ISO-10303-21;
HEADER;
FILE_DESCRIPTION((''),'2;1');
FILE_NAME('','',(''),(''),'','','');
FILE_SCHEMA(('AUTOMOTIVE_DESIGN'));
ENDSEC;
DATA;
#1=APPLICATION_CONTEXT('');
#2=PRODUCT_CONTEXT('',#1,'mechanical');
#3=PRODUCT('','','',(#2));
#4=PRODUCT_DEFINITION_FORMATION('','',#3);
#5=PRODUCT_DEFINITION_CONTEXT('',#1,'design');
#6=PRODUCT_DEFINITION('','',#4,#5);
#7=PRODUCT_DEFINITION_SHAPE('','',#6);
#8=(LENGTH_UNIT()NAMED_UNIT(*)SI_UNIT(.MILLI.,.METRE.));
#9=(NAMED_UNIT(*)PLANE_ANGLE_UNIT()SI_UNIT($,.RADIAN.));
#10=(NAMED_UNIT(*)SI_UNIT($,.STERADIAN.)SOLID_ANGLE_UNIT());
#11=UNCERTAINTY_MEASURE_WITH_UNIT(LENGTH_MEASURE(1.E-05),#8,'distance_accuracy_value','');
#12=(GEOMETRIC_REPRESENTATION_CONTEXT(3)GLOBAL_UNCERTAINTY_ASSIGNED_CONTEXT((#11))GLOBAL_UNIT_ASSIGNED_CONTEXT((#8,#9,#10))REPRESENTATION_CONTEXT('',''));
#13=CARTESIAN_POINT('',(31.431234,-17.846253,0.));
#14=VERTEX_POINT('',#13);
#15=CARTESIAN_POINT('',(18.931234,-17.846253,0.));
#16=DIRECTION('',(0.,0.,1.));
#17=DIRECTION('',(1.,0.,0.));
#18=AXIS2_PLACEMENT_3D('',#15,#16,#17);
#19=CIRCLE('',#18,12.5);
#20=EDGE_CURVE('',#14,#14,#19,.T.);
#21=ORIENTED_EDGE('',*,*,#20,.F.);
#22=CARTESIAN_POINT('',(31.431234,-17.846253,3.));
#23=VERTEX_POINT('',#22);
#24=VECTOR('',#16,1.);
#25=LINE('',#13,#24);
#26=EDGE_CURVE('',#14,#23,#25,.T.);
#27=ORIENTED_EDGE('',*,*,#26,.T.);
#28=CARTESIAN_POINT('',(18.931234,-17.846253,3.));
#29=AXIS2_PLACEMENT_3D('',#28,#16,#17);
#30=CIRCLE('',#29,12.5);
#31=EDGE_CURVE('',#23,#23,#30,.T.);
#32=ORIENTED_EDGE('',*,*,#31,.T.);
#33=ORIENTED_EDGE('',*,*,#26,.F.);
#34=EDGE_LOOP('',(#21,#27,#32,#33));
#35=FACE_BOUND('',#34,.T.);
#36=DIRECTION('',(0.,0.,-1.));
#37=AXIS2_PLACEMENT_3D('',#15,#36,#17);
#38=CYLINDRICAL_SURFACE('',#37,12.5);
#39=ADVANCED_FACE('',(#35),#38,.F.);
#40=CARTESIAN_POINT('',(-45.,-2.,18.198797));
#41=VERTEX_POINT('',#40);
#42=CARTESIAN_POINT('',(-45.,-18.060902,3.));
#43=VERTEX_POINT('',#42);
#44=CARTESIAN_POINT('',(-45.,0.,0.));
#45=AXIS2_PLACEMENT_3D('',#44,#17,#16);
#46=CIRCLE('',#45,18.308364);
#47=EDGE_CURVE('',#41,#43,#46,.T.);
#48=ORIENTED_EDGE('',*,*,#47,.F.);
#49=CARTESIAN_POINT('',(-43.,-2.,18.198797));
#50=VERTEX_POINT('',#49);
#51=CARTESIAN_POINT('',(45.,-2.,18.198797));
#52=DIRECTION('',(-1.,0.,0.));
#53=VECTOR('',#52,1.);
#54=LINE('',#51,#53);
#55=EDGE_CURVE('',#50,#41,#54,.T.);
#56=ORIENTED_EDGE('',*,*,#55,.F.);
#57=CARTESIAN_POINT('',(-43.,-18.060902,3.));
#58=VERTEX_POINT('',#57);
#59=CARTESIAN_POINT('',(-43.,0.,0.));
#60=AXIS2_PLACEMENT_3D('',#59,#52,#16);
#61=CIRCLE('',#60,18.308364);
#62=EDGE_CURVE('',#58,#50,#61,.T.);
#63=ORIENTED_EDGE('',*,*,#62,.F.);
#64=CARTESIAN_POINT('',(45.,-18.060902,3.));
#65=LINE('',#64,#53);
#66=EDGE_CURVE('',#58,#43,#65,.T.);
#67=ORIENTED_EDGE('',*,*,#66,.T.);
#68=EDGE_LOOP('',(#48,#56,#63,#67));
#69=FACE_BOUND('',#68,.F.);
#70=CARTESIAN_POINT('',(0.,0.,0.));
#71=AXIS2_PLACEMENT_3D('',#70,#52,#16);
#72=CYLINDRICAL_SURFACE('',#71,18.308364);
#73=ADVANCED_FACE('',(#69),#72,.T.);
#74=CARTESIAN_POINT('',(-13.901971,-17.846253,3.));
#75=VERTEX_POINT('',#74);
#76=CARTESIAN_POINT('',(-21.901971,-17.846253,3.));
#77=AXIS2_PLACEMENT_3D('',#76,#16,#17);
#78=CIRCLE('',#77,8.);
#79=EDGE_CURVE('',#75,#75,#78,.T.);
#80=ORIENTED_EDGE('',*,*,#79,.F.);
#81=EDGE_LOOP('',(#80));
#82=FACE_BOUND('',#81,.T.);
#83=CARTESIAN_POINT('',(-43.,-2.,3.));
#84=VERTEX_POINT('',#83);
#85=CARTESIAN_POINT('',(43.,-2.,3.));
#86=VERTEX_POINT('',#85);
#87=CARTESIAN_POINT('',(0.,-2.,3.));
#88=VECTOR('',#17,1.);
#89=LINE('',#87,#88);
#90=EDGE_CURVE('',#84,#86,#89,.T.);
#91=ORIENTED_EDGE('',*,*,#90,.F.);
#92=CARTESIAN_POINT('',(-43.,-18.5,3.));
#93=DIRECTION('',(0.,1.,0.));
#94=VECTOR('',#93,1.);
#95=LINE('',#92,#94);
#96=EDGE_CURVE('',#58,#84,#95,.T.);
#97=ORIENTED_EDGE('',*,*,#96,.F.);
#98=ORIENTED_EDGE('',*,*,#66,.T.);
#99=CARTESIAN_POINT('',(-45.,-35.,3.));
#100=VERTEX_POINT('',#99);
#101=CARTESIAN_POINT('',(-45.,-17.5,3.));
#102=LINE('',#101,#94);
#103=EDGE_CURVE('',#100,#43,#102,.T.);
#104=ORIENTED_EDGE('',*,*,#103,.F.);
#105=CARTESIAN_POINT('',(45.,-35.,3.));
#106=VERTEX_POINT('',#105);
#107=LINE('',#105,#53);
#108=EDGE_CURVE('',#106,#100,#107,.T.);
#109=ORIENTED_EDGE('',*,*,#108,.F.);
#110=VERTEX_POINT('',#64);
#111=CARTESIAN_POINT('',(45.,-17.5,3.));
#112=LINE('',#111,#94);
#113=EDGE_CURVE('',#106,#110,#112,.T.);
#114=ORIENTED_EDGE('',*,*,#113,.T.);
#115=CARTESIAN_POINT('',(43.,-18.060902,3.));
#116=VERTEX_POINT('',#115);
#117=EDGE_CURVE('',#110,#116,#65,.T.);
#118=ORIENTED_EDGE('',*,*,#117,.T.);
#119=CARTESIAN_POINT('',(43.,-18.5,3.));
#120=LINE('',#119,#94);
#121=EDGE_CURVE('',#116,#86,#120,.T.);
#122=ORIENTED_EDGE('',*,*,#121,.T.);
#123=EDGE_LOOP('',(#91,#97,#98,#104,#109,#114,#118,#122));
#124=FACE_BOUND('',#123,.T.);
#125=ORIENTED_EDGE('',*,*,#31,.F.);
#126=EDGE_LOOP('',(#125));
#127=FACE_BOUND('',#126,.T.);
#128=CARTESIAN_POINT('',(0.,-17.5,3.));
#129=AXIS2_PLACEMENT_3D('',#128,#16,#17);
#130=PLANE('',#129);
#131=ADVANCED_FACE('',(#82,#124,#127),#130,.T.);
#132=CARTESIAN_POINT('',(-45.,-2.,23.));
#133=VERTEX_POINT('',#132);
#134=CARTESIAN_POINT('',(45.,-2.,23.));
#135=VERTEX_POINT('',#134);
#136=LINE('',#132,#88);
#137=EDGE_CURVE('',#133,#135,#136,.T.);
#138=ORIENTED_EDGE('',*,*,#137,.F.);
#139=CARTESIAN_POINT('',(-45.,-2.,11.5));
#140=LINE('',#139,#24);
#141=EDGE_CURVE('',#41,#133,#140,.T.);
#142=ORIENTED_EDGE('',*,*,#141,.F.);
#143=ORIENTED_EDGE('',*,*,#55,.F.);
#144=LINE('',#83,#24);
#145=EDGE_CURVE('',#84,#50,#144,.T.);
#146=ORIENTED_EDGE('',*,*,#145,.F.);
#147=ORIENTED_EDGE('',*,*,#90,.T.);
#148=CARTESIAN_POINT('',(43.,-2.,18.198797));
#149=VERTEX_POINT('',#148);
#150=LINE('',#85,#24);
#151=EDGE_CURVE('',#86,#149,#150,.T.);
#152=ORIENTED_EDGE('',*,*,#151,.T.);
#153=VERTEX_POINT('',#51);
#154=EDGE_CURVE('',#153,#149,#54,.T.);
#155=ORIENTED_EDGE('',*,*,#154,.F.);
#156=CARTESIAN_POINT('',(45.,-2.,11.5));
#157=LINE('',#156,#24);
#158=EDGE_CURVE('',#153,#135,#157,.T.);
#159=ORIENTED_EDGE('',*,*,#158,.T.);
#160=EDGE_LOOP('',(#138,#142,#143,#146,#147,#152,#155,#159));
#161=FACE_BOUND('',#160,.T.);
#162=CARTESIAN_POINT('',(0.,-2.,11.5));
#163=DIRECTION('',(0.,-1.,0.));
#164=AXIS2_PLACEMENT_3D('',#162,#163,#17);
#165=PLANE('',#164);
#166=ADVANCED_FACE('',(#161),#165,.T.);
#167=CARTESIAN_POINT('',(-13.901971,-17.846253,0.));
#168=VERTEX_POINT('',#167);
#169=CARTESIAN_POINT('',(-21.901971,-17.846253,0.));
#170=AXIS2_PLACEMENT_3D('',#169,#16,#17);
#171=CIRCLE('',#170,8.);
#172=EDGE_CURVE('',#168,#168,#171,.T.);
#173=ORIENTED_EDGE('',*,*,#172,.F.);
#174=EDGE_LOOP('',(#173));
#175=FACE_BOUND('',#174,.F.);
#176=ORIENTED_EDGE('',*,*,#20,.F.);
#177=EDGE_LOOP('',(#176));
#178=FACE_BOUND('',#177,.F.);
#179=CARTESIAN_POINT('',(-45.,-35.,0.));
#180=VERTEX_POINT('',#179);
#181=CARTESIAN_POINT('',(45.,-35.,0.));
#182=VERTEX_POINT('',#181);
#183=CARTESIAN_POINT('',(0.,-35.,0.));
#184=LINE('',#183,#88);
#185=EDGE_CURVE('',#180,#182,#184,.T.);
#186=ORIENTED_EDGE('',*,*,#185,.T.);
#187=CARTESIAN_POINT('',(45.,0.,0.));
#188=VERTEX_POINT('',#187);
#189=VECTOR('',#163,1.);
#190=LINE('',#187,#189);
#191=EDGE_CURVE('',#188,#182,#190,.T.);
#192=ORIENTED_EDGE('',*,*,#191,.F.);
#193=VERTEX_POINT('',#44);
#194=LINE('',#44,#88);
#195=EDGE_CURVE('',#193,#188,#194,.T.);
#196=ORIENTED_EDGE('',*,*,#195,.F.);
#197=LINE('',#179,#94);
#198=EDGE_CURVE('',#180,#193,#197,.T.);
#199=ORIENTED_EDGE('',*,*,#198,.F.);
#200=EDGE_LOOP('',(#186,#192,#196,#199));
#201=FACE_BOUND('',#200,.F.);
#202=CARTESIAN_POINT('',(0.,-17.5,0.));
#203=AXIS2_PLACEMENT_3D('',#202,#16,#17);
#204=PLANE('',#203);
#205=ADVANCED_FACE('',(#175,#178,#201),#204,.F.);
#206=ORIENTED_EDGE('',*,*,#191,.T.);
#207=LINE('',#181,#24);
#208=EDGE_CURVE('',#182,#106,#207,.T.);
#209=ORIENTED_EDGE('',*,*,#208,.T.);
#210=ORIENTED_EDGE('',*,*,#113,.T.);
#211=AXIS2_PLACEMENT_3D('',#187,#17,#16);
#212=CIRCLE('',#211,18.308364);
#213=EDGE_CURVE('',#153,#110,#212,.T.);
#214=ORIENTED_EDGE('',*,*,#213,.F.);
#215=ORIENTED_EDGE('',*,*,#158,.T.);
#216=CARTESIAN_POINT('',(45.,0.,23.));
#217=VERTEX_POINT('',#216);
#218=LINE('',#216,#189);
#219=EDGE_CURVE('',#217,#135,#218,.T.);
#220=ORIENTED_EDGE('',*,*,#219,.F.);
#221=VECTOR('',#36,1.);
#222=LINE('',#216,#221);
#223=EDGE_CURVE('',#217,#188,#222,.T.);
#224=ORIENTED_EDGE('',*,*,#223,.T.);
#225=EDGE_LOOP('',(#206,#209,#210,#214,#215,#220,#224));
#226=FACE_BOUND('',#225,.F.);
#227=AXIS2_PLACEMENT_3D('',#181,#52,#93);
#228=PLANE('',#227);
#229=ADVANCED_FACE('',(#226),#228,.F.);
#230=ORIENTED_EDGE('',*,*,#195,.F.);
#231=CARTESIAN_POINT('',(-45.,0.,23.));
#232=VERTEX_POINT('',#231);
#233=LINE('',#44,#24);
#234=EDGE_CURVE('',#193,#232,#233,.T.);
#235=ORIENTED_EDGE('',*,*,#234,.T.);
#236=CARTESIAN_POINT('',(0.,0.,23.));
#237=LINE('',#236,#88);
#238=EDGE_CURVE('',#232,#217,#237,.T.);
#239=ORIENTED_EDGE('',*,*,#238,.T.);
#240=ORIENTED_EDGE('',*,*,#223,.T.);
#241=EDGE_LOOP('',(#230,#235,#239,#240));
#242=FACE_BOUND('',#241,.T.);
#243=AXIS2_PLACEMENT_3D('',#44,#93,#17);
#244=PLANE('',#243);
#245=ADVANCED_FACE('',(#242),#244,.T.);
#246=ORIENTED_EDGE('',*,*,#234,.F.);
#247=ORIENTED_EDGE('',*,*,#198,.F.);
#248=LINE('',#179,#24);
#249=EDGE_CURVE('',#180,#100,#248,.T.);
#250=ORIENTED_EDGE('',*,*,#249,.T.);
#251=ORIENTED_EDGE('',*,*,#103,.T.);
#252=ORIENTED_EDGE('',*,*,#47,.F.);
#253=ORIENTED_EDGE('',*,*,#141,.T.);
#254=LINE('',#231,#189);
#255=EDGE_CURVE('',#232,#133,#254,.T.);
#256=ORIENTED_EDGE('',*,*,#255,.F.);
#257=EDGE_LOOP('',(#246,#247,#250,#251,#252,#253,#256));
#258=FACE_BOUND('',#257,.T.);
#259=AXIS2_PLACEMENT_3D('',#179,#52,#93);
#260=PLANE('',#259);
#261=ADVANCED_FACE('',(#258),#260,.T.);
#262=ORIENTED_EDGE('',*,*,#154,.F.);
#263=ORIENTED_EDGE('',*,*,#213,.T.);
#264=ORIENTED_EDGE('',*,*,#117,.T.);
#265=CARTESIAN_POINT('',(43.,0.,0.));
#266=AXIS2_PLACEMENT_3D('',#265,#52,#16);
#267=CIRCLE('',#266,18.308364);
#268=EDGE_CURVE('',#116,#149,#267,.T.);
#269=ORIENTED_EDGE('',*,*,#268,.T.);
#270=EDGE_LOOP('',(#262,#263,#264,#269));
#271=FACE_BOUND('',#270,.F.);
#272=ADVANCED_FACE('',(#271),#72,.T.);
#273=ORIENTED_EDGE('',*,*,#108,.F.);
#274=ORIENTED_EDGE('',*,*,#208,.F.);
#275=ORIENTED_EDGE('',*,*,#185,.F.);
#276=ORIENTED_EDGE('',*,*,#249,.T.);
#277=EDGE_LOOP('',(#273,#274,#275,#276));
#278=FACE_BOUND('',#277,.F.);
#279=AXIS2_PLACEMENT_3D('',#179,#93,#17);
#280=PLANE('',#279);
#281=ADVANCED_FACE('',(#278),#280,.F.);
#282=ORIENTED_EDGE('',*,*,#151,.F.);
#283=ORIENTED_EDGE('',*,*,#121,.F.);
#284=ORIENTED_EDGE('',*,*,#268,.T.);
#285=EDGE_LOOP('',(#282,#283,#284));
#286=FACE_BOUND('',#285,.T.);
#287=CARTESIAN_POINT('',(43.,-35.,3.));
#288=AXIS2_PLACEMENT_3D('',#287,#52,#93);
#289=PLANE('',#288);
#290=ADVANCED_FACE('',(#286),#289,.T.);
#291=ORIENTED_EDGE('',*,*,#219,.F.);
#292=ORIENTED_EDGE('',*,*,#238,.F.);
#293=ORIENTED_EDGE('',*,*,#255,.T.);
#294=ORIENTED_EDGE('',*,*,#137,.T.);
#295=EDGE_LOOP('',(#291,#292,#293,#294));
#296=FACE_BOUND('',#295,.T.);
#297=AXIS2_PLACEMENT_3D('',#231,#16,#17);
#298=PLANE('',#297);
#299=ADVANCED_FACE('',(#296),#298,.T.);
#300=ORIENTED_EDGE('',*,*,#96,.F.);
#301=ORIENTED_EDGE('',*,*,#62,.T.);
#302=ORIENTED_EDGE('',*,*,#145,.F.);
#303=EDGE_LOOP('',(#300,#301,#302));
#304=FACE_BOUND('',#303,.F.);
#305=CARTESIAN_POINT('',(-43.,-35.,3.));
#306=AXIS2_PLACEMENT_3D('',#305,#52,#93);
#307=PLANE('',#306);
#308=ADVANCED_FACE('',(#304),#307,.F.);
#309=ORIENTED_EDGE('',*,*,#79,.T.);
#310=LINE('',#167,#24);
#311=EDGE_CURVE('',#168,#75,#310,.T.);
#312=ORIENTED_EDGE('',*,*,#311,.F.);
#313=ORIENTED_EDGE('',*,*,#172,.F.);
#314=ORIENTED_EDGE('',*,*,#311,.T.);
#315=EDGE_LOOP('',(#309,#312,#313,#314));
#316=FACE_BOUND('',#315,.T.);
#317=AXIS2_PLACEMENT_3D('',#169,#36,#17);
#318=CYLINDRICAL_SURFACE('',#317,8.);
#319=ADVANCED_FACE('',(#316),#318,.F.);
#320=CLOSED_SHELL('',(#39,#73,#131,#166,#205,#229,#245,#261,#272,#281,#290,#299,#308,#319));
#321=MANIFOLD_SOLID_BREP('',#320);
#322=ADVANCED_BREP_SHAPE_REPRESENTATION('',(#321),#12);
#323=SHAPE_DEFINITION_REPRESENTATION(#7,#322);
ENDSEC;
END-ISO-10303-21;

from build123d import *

# Parameters (mm, degrees)
F0_W          = 90
F0_H          = 35
F1_DEPTH      = 3
F2_W          = 90
F2_H          = 23
F3_DEPTH      = 2
F5_DEPTH      = 45
F5_DEPTH_BACK = 45
F7_START      = 3
F6_W          = 86
F6_H          = 33
F7_DEPTH      = 32.9
F8_R          = 12.5
F8_R_2        = 8
F9_DEPTH      = 3


with BuildPart() as f1:
    # F0 (on Top) → F1 (new body)
    with BuildSketch(Plane.XY):
        with Locations((0, -17.5)):
            Rectangle(F0_W, F0_H)
    extrude(amount=F1_DEPTH)

    # F2 (on Front) → F3 (join)
    with BuildSketch(Plane.XZ):
        with Locations((0, 11.5)):
            Rectangle(F2_W, F2_H)
    extrude(amount=F3_DEPTH)

    # F4 (on Right) → F5 (join, two sides)
    with BuildSketch(Plane.YZ) as f5_sk:
        with BuildLine():
            Line((-18.3083641247, 0), (0, 0))
            Line((0, 0), (0, 18.3083641247))
            ThreePointArc((0, 18.3083641247), (-12.945968425, 12.945968425), (-18.3083641247, 0))
        make_face()
    extrude(amount=F5_DEPTH)
    extrude(f5_sk.sketch, amount=-F5_DEPTH_BACK)

    # F6 (on Top) → F7 (cut)
    with BuildSketch(Plane.XY.offset(F7_START)):
        with Locations((0, -18.5)):
            Rectangle(F6_W, F6_H)
    extrude(amount=F7_DEPTH, mode=Mode.SUBTRACT)

    # F8 (on Top) → F9 (cut)
    with BuildSketch(Plane.XY):
        with Locations((18.9312342554, -17.8462527692)):
            Circle(F8_R)
        with Locations((-21.9019707292, -17.8462527692)):
            Circle(F8_R_2)
    extrude(amount=F9_DEPTH, mode=Mode.SUBTRACT)


solid = f1.part
